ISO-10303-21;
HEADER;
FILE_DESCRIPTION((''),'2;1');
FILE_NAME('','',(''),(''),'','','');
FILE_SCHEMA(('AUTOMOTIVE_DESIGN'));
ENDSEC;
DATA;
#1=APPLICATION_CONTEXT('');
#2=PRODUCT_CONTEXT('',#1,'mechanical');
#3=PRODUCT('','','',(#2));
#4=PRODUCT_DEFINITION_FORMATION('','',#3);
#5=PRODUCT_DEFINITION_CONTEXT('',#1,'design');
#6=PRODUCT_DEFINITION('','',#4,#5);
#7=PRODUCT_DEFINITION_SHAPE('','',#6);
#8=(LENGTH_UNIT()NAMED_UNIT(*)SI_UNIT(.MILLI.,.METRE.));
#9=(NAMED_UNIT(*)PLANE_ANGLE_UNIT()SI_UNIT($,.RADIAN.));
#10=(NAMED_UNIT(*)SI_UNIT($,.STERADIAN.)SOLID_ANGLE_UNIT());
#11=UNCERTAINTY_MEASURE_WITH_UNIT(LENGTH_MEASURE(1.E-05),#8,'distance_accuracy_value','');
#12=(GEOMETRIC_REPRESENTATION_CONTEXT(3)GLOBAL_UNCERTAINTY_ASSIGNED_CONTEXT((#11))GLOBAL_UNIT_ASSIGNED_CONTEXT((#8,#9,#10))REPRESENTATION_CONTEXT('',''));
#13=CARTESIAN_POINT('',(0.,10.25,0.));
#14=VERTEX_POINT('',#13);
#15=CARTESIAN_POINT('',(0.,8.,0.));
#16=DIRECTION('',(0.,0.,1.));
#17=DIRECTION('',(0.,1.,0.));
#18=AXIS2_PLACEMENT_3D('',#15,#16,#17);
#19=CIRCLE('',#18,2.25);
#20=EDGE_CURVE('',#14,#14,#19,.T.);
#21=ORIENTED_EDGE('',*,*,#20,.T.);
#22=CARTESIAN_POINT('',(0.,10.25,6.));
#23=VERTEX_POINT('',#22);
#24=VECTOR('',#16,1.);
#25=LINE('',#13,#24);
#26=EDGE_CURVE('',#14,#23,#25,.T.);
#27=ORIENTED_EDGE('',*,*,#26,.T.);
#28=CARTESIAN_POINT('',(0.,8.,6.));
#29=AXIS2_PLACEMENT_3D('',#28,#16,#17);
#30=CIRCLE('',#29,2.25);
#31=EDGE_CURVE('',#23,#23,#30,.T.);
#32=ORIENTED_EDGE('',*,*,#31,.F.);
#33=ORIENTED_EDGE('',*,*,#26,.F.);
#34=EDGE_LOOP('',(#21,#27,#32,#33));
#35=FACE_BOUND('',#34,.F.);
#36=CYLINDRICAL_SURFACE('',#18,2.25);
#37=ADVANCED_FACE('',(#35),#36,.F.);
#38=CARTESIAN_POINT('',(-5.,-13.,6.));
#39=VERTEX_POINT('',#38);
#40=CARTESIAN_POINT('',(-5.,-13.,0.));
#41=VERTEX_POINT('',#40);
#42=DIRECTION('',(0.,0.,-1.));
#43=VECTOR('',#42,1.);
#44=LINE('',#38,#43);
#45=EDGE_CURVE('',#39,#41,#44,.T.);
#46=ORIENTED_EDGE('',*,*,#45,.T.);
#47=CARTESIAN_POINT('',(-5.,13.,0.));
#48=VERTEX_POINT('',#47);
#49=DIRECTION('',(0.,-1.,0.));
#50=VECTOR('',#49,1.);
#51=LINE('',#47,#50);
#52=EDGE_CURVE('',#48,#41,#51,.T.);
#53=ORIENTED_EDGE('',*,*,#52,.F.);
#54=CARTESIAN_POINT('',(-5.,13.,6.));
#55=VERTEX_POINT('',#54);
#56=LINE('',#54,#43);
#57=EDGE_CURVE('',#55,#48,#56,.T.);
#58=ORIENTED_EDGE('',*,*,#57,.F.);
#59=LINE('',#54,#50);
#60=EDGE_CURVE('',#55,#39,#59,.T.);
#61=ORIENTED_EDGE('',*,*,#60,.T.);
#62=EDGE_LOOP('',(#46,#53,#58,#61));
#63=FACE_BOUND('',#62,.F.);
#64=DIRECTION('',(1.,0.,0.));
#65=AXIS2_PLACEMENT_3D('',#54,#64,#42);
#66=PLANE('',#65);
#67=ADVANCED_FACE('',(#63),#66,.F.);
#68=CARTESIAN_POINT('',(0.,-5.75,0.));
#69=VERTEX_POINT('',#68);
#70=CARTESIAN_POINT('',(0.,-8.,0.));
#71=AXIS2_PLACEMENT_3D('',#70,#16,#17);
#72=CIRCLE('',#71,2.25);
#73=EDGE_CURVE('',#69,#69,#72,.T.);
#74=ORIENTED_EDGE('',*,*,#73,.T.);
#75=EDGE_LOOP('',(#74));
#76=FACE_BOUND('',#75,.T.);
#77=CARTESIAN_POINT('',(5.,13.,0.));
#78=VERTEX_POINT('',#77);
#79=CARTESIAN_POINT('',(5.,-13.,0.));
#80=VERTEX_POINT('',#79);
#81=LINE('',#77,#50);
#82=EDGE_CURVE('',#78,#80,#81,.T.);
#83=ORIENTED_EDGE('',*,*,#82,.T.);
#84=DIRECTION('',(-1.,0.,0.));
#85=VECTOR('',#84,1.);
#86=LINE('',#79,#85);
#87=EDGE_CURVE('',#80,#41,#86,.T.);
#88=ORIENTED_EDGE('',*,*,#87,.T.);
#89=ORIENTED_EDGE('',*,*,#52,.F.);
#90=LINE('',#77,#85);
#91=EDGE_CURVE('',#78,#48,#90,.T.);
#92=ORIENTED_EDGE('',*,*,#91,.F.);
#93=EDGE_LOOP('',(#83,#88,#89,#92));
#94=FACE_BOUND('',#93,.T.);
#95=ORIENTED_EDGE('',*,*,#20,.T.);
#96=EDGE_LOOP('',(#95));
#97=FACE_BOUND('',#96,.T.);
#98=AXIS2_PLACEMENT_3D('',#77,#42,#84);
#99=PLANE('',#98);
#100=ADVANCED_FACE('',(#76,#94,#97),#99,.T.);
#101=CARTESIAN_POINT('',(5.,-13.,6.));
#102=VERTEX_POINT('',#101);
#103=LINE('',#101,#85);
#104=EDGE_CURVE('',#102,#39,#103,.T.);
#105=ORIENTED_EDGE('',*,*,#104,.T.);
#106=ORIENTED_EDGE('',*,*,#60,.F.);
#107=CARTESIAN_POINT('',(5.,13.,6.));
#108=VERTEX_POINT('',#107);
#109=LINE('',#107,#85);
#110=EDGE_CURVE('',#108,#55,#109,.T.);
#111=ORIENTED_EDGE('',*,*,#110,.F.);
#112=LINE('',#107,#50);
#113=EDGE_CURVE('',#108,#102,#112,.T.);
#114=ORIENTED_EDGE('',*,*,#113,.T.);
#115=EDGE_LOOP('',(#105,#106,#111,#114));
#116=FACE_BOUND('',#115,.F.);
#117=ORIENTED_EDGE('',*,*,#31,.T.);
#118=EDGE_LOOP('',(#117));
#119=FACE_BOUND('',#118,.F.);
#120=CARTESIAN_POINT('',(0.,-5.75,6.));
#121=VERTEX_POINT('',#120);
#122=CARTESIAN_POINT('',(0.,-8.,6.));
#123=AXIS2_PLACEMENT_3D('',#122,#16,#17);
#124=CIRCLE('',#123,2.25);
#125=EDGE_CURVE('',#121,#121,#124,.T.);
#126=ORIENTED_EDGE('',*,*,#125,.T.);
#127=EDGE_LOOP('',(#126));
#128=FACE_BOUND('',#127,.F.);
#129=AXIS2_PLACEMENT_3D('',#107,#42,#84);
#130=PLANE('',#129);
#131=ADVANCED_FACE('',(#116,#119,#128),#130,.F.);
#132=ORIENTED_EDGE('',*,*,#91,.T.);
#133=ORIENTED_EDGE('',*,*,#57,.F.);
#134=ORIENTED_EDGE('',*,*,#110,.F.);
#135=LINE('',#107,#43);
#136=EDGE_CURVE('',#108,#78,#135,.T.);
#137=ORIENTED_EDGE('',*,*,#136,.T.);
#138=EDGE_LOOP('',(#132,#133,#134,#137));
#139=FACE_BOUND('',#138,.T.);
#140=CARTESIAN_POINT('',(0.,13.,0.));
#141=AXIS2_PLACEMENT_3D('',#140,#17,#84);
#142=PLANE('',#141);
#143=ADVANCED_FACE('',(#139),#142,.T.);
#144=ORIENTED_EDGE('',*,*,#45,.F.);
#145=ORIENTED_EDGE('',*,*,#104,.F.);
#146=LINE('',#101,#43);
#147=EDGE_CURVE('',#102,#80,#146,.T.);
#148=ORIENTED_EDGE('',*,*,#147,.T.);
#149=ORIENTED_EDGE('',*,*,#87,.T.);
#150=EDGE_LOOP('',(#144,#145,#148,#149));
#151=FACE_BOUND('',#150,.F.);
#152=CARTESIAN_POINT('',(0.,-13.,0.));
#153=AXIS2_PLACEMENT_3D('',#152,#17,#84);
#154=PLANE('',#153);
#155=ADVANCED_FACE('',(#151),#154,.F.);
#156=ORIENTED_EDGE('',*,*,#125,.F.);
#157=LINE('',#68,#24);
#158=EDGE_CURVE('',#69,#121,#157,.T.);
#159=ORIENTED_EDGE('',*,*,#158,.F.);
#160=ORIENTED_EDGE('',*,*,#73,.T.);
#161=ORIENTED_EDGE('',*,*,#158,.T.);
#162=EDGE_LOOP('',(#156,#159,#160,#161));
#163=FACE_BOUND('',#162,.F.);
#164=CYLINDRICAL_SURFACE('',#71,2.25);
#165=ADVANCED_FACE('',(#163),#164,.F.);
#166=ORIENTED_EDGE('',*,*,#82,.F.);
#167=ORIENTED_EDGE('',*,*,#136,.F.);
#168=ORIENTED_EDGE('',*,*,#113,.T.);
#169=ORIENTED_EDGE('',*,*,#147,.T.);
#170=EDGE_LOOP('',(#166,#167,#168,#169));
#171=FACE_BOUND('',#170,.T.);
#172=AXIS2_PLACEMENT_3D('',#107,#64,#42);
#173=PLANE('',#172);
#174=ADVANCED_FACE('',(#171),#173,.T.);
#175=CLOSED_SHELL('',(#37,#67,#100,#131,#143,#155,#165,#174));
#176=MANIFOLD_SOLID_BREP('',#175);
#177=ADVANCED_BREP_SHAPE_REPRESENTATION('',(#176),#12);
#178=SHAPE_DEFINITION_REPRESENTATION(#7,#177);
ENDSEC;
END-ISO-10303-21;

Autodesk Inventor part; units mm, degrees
ref_plane "YZ Plane" through (0, 0, 0) normal (1, 0, 0) x (0, 1, 0)
ref_plane "XY Plane" through (0, 0, 0) normal (0, 0, 1) x (1, 0, 0)
ref_plane "Work Plane1" through (0, 13, 0) normal (0, 1, 0) x (-1, 0, 0)
sketch "Sketch1" plane through (0, 13, 0) normal (0, 1, 0) x (-1, 0, 0)
  line L0 (5, 6) -> (5, 0)
  line L1 (-5, 6) -> (5, 6)
  line L2 (-5, 0) -> (5, 0)
  line L3 (-5, 6) -> (-5, 0)
extrude "Extrusion1" add sketch "Sketch1" against normal blind 26
hole "Hole2" at (0, -8, 0) direction (0, 0, 1) diameter 4.5 depth 6
sketch "Sketch2" plane through (0, 0, 0) normal (0, 0, 1) x (1, 0, 0)
  point P0 (0, -8)
hole "Hole1" at (0, 8, 0) direction (0, 0, 1) diameter 4.5 depth 6
sketch "Sketch3" plane through (0, 0, 0) normal (0, 0, 1) x (1, 0, 0)
  point P0 (0, 8)
properties part number "carriage Belt clamp" material "ASA Plastic"
